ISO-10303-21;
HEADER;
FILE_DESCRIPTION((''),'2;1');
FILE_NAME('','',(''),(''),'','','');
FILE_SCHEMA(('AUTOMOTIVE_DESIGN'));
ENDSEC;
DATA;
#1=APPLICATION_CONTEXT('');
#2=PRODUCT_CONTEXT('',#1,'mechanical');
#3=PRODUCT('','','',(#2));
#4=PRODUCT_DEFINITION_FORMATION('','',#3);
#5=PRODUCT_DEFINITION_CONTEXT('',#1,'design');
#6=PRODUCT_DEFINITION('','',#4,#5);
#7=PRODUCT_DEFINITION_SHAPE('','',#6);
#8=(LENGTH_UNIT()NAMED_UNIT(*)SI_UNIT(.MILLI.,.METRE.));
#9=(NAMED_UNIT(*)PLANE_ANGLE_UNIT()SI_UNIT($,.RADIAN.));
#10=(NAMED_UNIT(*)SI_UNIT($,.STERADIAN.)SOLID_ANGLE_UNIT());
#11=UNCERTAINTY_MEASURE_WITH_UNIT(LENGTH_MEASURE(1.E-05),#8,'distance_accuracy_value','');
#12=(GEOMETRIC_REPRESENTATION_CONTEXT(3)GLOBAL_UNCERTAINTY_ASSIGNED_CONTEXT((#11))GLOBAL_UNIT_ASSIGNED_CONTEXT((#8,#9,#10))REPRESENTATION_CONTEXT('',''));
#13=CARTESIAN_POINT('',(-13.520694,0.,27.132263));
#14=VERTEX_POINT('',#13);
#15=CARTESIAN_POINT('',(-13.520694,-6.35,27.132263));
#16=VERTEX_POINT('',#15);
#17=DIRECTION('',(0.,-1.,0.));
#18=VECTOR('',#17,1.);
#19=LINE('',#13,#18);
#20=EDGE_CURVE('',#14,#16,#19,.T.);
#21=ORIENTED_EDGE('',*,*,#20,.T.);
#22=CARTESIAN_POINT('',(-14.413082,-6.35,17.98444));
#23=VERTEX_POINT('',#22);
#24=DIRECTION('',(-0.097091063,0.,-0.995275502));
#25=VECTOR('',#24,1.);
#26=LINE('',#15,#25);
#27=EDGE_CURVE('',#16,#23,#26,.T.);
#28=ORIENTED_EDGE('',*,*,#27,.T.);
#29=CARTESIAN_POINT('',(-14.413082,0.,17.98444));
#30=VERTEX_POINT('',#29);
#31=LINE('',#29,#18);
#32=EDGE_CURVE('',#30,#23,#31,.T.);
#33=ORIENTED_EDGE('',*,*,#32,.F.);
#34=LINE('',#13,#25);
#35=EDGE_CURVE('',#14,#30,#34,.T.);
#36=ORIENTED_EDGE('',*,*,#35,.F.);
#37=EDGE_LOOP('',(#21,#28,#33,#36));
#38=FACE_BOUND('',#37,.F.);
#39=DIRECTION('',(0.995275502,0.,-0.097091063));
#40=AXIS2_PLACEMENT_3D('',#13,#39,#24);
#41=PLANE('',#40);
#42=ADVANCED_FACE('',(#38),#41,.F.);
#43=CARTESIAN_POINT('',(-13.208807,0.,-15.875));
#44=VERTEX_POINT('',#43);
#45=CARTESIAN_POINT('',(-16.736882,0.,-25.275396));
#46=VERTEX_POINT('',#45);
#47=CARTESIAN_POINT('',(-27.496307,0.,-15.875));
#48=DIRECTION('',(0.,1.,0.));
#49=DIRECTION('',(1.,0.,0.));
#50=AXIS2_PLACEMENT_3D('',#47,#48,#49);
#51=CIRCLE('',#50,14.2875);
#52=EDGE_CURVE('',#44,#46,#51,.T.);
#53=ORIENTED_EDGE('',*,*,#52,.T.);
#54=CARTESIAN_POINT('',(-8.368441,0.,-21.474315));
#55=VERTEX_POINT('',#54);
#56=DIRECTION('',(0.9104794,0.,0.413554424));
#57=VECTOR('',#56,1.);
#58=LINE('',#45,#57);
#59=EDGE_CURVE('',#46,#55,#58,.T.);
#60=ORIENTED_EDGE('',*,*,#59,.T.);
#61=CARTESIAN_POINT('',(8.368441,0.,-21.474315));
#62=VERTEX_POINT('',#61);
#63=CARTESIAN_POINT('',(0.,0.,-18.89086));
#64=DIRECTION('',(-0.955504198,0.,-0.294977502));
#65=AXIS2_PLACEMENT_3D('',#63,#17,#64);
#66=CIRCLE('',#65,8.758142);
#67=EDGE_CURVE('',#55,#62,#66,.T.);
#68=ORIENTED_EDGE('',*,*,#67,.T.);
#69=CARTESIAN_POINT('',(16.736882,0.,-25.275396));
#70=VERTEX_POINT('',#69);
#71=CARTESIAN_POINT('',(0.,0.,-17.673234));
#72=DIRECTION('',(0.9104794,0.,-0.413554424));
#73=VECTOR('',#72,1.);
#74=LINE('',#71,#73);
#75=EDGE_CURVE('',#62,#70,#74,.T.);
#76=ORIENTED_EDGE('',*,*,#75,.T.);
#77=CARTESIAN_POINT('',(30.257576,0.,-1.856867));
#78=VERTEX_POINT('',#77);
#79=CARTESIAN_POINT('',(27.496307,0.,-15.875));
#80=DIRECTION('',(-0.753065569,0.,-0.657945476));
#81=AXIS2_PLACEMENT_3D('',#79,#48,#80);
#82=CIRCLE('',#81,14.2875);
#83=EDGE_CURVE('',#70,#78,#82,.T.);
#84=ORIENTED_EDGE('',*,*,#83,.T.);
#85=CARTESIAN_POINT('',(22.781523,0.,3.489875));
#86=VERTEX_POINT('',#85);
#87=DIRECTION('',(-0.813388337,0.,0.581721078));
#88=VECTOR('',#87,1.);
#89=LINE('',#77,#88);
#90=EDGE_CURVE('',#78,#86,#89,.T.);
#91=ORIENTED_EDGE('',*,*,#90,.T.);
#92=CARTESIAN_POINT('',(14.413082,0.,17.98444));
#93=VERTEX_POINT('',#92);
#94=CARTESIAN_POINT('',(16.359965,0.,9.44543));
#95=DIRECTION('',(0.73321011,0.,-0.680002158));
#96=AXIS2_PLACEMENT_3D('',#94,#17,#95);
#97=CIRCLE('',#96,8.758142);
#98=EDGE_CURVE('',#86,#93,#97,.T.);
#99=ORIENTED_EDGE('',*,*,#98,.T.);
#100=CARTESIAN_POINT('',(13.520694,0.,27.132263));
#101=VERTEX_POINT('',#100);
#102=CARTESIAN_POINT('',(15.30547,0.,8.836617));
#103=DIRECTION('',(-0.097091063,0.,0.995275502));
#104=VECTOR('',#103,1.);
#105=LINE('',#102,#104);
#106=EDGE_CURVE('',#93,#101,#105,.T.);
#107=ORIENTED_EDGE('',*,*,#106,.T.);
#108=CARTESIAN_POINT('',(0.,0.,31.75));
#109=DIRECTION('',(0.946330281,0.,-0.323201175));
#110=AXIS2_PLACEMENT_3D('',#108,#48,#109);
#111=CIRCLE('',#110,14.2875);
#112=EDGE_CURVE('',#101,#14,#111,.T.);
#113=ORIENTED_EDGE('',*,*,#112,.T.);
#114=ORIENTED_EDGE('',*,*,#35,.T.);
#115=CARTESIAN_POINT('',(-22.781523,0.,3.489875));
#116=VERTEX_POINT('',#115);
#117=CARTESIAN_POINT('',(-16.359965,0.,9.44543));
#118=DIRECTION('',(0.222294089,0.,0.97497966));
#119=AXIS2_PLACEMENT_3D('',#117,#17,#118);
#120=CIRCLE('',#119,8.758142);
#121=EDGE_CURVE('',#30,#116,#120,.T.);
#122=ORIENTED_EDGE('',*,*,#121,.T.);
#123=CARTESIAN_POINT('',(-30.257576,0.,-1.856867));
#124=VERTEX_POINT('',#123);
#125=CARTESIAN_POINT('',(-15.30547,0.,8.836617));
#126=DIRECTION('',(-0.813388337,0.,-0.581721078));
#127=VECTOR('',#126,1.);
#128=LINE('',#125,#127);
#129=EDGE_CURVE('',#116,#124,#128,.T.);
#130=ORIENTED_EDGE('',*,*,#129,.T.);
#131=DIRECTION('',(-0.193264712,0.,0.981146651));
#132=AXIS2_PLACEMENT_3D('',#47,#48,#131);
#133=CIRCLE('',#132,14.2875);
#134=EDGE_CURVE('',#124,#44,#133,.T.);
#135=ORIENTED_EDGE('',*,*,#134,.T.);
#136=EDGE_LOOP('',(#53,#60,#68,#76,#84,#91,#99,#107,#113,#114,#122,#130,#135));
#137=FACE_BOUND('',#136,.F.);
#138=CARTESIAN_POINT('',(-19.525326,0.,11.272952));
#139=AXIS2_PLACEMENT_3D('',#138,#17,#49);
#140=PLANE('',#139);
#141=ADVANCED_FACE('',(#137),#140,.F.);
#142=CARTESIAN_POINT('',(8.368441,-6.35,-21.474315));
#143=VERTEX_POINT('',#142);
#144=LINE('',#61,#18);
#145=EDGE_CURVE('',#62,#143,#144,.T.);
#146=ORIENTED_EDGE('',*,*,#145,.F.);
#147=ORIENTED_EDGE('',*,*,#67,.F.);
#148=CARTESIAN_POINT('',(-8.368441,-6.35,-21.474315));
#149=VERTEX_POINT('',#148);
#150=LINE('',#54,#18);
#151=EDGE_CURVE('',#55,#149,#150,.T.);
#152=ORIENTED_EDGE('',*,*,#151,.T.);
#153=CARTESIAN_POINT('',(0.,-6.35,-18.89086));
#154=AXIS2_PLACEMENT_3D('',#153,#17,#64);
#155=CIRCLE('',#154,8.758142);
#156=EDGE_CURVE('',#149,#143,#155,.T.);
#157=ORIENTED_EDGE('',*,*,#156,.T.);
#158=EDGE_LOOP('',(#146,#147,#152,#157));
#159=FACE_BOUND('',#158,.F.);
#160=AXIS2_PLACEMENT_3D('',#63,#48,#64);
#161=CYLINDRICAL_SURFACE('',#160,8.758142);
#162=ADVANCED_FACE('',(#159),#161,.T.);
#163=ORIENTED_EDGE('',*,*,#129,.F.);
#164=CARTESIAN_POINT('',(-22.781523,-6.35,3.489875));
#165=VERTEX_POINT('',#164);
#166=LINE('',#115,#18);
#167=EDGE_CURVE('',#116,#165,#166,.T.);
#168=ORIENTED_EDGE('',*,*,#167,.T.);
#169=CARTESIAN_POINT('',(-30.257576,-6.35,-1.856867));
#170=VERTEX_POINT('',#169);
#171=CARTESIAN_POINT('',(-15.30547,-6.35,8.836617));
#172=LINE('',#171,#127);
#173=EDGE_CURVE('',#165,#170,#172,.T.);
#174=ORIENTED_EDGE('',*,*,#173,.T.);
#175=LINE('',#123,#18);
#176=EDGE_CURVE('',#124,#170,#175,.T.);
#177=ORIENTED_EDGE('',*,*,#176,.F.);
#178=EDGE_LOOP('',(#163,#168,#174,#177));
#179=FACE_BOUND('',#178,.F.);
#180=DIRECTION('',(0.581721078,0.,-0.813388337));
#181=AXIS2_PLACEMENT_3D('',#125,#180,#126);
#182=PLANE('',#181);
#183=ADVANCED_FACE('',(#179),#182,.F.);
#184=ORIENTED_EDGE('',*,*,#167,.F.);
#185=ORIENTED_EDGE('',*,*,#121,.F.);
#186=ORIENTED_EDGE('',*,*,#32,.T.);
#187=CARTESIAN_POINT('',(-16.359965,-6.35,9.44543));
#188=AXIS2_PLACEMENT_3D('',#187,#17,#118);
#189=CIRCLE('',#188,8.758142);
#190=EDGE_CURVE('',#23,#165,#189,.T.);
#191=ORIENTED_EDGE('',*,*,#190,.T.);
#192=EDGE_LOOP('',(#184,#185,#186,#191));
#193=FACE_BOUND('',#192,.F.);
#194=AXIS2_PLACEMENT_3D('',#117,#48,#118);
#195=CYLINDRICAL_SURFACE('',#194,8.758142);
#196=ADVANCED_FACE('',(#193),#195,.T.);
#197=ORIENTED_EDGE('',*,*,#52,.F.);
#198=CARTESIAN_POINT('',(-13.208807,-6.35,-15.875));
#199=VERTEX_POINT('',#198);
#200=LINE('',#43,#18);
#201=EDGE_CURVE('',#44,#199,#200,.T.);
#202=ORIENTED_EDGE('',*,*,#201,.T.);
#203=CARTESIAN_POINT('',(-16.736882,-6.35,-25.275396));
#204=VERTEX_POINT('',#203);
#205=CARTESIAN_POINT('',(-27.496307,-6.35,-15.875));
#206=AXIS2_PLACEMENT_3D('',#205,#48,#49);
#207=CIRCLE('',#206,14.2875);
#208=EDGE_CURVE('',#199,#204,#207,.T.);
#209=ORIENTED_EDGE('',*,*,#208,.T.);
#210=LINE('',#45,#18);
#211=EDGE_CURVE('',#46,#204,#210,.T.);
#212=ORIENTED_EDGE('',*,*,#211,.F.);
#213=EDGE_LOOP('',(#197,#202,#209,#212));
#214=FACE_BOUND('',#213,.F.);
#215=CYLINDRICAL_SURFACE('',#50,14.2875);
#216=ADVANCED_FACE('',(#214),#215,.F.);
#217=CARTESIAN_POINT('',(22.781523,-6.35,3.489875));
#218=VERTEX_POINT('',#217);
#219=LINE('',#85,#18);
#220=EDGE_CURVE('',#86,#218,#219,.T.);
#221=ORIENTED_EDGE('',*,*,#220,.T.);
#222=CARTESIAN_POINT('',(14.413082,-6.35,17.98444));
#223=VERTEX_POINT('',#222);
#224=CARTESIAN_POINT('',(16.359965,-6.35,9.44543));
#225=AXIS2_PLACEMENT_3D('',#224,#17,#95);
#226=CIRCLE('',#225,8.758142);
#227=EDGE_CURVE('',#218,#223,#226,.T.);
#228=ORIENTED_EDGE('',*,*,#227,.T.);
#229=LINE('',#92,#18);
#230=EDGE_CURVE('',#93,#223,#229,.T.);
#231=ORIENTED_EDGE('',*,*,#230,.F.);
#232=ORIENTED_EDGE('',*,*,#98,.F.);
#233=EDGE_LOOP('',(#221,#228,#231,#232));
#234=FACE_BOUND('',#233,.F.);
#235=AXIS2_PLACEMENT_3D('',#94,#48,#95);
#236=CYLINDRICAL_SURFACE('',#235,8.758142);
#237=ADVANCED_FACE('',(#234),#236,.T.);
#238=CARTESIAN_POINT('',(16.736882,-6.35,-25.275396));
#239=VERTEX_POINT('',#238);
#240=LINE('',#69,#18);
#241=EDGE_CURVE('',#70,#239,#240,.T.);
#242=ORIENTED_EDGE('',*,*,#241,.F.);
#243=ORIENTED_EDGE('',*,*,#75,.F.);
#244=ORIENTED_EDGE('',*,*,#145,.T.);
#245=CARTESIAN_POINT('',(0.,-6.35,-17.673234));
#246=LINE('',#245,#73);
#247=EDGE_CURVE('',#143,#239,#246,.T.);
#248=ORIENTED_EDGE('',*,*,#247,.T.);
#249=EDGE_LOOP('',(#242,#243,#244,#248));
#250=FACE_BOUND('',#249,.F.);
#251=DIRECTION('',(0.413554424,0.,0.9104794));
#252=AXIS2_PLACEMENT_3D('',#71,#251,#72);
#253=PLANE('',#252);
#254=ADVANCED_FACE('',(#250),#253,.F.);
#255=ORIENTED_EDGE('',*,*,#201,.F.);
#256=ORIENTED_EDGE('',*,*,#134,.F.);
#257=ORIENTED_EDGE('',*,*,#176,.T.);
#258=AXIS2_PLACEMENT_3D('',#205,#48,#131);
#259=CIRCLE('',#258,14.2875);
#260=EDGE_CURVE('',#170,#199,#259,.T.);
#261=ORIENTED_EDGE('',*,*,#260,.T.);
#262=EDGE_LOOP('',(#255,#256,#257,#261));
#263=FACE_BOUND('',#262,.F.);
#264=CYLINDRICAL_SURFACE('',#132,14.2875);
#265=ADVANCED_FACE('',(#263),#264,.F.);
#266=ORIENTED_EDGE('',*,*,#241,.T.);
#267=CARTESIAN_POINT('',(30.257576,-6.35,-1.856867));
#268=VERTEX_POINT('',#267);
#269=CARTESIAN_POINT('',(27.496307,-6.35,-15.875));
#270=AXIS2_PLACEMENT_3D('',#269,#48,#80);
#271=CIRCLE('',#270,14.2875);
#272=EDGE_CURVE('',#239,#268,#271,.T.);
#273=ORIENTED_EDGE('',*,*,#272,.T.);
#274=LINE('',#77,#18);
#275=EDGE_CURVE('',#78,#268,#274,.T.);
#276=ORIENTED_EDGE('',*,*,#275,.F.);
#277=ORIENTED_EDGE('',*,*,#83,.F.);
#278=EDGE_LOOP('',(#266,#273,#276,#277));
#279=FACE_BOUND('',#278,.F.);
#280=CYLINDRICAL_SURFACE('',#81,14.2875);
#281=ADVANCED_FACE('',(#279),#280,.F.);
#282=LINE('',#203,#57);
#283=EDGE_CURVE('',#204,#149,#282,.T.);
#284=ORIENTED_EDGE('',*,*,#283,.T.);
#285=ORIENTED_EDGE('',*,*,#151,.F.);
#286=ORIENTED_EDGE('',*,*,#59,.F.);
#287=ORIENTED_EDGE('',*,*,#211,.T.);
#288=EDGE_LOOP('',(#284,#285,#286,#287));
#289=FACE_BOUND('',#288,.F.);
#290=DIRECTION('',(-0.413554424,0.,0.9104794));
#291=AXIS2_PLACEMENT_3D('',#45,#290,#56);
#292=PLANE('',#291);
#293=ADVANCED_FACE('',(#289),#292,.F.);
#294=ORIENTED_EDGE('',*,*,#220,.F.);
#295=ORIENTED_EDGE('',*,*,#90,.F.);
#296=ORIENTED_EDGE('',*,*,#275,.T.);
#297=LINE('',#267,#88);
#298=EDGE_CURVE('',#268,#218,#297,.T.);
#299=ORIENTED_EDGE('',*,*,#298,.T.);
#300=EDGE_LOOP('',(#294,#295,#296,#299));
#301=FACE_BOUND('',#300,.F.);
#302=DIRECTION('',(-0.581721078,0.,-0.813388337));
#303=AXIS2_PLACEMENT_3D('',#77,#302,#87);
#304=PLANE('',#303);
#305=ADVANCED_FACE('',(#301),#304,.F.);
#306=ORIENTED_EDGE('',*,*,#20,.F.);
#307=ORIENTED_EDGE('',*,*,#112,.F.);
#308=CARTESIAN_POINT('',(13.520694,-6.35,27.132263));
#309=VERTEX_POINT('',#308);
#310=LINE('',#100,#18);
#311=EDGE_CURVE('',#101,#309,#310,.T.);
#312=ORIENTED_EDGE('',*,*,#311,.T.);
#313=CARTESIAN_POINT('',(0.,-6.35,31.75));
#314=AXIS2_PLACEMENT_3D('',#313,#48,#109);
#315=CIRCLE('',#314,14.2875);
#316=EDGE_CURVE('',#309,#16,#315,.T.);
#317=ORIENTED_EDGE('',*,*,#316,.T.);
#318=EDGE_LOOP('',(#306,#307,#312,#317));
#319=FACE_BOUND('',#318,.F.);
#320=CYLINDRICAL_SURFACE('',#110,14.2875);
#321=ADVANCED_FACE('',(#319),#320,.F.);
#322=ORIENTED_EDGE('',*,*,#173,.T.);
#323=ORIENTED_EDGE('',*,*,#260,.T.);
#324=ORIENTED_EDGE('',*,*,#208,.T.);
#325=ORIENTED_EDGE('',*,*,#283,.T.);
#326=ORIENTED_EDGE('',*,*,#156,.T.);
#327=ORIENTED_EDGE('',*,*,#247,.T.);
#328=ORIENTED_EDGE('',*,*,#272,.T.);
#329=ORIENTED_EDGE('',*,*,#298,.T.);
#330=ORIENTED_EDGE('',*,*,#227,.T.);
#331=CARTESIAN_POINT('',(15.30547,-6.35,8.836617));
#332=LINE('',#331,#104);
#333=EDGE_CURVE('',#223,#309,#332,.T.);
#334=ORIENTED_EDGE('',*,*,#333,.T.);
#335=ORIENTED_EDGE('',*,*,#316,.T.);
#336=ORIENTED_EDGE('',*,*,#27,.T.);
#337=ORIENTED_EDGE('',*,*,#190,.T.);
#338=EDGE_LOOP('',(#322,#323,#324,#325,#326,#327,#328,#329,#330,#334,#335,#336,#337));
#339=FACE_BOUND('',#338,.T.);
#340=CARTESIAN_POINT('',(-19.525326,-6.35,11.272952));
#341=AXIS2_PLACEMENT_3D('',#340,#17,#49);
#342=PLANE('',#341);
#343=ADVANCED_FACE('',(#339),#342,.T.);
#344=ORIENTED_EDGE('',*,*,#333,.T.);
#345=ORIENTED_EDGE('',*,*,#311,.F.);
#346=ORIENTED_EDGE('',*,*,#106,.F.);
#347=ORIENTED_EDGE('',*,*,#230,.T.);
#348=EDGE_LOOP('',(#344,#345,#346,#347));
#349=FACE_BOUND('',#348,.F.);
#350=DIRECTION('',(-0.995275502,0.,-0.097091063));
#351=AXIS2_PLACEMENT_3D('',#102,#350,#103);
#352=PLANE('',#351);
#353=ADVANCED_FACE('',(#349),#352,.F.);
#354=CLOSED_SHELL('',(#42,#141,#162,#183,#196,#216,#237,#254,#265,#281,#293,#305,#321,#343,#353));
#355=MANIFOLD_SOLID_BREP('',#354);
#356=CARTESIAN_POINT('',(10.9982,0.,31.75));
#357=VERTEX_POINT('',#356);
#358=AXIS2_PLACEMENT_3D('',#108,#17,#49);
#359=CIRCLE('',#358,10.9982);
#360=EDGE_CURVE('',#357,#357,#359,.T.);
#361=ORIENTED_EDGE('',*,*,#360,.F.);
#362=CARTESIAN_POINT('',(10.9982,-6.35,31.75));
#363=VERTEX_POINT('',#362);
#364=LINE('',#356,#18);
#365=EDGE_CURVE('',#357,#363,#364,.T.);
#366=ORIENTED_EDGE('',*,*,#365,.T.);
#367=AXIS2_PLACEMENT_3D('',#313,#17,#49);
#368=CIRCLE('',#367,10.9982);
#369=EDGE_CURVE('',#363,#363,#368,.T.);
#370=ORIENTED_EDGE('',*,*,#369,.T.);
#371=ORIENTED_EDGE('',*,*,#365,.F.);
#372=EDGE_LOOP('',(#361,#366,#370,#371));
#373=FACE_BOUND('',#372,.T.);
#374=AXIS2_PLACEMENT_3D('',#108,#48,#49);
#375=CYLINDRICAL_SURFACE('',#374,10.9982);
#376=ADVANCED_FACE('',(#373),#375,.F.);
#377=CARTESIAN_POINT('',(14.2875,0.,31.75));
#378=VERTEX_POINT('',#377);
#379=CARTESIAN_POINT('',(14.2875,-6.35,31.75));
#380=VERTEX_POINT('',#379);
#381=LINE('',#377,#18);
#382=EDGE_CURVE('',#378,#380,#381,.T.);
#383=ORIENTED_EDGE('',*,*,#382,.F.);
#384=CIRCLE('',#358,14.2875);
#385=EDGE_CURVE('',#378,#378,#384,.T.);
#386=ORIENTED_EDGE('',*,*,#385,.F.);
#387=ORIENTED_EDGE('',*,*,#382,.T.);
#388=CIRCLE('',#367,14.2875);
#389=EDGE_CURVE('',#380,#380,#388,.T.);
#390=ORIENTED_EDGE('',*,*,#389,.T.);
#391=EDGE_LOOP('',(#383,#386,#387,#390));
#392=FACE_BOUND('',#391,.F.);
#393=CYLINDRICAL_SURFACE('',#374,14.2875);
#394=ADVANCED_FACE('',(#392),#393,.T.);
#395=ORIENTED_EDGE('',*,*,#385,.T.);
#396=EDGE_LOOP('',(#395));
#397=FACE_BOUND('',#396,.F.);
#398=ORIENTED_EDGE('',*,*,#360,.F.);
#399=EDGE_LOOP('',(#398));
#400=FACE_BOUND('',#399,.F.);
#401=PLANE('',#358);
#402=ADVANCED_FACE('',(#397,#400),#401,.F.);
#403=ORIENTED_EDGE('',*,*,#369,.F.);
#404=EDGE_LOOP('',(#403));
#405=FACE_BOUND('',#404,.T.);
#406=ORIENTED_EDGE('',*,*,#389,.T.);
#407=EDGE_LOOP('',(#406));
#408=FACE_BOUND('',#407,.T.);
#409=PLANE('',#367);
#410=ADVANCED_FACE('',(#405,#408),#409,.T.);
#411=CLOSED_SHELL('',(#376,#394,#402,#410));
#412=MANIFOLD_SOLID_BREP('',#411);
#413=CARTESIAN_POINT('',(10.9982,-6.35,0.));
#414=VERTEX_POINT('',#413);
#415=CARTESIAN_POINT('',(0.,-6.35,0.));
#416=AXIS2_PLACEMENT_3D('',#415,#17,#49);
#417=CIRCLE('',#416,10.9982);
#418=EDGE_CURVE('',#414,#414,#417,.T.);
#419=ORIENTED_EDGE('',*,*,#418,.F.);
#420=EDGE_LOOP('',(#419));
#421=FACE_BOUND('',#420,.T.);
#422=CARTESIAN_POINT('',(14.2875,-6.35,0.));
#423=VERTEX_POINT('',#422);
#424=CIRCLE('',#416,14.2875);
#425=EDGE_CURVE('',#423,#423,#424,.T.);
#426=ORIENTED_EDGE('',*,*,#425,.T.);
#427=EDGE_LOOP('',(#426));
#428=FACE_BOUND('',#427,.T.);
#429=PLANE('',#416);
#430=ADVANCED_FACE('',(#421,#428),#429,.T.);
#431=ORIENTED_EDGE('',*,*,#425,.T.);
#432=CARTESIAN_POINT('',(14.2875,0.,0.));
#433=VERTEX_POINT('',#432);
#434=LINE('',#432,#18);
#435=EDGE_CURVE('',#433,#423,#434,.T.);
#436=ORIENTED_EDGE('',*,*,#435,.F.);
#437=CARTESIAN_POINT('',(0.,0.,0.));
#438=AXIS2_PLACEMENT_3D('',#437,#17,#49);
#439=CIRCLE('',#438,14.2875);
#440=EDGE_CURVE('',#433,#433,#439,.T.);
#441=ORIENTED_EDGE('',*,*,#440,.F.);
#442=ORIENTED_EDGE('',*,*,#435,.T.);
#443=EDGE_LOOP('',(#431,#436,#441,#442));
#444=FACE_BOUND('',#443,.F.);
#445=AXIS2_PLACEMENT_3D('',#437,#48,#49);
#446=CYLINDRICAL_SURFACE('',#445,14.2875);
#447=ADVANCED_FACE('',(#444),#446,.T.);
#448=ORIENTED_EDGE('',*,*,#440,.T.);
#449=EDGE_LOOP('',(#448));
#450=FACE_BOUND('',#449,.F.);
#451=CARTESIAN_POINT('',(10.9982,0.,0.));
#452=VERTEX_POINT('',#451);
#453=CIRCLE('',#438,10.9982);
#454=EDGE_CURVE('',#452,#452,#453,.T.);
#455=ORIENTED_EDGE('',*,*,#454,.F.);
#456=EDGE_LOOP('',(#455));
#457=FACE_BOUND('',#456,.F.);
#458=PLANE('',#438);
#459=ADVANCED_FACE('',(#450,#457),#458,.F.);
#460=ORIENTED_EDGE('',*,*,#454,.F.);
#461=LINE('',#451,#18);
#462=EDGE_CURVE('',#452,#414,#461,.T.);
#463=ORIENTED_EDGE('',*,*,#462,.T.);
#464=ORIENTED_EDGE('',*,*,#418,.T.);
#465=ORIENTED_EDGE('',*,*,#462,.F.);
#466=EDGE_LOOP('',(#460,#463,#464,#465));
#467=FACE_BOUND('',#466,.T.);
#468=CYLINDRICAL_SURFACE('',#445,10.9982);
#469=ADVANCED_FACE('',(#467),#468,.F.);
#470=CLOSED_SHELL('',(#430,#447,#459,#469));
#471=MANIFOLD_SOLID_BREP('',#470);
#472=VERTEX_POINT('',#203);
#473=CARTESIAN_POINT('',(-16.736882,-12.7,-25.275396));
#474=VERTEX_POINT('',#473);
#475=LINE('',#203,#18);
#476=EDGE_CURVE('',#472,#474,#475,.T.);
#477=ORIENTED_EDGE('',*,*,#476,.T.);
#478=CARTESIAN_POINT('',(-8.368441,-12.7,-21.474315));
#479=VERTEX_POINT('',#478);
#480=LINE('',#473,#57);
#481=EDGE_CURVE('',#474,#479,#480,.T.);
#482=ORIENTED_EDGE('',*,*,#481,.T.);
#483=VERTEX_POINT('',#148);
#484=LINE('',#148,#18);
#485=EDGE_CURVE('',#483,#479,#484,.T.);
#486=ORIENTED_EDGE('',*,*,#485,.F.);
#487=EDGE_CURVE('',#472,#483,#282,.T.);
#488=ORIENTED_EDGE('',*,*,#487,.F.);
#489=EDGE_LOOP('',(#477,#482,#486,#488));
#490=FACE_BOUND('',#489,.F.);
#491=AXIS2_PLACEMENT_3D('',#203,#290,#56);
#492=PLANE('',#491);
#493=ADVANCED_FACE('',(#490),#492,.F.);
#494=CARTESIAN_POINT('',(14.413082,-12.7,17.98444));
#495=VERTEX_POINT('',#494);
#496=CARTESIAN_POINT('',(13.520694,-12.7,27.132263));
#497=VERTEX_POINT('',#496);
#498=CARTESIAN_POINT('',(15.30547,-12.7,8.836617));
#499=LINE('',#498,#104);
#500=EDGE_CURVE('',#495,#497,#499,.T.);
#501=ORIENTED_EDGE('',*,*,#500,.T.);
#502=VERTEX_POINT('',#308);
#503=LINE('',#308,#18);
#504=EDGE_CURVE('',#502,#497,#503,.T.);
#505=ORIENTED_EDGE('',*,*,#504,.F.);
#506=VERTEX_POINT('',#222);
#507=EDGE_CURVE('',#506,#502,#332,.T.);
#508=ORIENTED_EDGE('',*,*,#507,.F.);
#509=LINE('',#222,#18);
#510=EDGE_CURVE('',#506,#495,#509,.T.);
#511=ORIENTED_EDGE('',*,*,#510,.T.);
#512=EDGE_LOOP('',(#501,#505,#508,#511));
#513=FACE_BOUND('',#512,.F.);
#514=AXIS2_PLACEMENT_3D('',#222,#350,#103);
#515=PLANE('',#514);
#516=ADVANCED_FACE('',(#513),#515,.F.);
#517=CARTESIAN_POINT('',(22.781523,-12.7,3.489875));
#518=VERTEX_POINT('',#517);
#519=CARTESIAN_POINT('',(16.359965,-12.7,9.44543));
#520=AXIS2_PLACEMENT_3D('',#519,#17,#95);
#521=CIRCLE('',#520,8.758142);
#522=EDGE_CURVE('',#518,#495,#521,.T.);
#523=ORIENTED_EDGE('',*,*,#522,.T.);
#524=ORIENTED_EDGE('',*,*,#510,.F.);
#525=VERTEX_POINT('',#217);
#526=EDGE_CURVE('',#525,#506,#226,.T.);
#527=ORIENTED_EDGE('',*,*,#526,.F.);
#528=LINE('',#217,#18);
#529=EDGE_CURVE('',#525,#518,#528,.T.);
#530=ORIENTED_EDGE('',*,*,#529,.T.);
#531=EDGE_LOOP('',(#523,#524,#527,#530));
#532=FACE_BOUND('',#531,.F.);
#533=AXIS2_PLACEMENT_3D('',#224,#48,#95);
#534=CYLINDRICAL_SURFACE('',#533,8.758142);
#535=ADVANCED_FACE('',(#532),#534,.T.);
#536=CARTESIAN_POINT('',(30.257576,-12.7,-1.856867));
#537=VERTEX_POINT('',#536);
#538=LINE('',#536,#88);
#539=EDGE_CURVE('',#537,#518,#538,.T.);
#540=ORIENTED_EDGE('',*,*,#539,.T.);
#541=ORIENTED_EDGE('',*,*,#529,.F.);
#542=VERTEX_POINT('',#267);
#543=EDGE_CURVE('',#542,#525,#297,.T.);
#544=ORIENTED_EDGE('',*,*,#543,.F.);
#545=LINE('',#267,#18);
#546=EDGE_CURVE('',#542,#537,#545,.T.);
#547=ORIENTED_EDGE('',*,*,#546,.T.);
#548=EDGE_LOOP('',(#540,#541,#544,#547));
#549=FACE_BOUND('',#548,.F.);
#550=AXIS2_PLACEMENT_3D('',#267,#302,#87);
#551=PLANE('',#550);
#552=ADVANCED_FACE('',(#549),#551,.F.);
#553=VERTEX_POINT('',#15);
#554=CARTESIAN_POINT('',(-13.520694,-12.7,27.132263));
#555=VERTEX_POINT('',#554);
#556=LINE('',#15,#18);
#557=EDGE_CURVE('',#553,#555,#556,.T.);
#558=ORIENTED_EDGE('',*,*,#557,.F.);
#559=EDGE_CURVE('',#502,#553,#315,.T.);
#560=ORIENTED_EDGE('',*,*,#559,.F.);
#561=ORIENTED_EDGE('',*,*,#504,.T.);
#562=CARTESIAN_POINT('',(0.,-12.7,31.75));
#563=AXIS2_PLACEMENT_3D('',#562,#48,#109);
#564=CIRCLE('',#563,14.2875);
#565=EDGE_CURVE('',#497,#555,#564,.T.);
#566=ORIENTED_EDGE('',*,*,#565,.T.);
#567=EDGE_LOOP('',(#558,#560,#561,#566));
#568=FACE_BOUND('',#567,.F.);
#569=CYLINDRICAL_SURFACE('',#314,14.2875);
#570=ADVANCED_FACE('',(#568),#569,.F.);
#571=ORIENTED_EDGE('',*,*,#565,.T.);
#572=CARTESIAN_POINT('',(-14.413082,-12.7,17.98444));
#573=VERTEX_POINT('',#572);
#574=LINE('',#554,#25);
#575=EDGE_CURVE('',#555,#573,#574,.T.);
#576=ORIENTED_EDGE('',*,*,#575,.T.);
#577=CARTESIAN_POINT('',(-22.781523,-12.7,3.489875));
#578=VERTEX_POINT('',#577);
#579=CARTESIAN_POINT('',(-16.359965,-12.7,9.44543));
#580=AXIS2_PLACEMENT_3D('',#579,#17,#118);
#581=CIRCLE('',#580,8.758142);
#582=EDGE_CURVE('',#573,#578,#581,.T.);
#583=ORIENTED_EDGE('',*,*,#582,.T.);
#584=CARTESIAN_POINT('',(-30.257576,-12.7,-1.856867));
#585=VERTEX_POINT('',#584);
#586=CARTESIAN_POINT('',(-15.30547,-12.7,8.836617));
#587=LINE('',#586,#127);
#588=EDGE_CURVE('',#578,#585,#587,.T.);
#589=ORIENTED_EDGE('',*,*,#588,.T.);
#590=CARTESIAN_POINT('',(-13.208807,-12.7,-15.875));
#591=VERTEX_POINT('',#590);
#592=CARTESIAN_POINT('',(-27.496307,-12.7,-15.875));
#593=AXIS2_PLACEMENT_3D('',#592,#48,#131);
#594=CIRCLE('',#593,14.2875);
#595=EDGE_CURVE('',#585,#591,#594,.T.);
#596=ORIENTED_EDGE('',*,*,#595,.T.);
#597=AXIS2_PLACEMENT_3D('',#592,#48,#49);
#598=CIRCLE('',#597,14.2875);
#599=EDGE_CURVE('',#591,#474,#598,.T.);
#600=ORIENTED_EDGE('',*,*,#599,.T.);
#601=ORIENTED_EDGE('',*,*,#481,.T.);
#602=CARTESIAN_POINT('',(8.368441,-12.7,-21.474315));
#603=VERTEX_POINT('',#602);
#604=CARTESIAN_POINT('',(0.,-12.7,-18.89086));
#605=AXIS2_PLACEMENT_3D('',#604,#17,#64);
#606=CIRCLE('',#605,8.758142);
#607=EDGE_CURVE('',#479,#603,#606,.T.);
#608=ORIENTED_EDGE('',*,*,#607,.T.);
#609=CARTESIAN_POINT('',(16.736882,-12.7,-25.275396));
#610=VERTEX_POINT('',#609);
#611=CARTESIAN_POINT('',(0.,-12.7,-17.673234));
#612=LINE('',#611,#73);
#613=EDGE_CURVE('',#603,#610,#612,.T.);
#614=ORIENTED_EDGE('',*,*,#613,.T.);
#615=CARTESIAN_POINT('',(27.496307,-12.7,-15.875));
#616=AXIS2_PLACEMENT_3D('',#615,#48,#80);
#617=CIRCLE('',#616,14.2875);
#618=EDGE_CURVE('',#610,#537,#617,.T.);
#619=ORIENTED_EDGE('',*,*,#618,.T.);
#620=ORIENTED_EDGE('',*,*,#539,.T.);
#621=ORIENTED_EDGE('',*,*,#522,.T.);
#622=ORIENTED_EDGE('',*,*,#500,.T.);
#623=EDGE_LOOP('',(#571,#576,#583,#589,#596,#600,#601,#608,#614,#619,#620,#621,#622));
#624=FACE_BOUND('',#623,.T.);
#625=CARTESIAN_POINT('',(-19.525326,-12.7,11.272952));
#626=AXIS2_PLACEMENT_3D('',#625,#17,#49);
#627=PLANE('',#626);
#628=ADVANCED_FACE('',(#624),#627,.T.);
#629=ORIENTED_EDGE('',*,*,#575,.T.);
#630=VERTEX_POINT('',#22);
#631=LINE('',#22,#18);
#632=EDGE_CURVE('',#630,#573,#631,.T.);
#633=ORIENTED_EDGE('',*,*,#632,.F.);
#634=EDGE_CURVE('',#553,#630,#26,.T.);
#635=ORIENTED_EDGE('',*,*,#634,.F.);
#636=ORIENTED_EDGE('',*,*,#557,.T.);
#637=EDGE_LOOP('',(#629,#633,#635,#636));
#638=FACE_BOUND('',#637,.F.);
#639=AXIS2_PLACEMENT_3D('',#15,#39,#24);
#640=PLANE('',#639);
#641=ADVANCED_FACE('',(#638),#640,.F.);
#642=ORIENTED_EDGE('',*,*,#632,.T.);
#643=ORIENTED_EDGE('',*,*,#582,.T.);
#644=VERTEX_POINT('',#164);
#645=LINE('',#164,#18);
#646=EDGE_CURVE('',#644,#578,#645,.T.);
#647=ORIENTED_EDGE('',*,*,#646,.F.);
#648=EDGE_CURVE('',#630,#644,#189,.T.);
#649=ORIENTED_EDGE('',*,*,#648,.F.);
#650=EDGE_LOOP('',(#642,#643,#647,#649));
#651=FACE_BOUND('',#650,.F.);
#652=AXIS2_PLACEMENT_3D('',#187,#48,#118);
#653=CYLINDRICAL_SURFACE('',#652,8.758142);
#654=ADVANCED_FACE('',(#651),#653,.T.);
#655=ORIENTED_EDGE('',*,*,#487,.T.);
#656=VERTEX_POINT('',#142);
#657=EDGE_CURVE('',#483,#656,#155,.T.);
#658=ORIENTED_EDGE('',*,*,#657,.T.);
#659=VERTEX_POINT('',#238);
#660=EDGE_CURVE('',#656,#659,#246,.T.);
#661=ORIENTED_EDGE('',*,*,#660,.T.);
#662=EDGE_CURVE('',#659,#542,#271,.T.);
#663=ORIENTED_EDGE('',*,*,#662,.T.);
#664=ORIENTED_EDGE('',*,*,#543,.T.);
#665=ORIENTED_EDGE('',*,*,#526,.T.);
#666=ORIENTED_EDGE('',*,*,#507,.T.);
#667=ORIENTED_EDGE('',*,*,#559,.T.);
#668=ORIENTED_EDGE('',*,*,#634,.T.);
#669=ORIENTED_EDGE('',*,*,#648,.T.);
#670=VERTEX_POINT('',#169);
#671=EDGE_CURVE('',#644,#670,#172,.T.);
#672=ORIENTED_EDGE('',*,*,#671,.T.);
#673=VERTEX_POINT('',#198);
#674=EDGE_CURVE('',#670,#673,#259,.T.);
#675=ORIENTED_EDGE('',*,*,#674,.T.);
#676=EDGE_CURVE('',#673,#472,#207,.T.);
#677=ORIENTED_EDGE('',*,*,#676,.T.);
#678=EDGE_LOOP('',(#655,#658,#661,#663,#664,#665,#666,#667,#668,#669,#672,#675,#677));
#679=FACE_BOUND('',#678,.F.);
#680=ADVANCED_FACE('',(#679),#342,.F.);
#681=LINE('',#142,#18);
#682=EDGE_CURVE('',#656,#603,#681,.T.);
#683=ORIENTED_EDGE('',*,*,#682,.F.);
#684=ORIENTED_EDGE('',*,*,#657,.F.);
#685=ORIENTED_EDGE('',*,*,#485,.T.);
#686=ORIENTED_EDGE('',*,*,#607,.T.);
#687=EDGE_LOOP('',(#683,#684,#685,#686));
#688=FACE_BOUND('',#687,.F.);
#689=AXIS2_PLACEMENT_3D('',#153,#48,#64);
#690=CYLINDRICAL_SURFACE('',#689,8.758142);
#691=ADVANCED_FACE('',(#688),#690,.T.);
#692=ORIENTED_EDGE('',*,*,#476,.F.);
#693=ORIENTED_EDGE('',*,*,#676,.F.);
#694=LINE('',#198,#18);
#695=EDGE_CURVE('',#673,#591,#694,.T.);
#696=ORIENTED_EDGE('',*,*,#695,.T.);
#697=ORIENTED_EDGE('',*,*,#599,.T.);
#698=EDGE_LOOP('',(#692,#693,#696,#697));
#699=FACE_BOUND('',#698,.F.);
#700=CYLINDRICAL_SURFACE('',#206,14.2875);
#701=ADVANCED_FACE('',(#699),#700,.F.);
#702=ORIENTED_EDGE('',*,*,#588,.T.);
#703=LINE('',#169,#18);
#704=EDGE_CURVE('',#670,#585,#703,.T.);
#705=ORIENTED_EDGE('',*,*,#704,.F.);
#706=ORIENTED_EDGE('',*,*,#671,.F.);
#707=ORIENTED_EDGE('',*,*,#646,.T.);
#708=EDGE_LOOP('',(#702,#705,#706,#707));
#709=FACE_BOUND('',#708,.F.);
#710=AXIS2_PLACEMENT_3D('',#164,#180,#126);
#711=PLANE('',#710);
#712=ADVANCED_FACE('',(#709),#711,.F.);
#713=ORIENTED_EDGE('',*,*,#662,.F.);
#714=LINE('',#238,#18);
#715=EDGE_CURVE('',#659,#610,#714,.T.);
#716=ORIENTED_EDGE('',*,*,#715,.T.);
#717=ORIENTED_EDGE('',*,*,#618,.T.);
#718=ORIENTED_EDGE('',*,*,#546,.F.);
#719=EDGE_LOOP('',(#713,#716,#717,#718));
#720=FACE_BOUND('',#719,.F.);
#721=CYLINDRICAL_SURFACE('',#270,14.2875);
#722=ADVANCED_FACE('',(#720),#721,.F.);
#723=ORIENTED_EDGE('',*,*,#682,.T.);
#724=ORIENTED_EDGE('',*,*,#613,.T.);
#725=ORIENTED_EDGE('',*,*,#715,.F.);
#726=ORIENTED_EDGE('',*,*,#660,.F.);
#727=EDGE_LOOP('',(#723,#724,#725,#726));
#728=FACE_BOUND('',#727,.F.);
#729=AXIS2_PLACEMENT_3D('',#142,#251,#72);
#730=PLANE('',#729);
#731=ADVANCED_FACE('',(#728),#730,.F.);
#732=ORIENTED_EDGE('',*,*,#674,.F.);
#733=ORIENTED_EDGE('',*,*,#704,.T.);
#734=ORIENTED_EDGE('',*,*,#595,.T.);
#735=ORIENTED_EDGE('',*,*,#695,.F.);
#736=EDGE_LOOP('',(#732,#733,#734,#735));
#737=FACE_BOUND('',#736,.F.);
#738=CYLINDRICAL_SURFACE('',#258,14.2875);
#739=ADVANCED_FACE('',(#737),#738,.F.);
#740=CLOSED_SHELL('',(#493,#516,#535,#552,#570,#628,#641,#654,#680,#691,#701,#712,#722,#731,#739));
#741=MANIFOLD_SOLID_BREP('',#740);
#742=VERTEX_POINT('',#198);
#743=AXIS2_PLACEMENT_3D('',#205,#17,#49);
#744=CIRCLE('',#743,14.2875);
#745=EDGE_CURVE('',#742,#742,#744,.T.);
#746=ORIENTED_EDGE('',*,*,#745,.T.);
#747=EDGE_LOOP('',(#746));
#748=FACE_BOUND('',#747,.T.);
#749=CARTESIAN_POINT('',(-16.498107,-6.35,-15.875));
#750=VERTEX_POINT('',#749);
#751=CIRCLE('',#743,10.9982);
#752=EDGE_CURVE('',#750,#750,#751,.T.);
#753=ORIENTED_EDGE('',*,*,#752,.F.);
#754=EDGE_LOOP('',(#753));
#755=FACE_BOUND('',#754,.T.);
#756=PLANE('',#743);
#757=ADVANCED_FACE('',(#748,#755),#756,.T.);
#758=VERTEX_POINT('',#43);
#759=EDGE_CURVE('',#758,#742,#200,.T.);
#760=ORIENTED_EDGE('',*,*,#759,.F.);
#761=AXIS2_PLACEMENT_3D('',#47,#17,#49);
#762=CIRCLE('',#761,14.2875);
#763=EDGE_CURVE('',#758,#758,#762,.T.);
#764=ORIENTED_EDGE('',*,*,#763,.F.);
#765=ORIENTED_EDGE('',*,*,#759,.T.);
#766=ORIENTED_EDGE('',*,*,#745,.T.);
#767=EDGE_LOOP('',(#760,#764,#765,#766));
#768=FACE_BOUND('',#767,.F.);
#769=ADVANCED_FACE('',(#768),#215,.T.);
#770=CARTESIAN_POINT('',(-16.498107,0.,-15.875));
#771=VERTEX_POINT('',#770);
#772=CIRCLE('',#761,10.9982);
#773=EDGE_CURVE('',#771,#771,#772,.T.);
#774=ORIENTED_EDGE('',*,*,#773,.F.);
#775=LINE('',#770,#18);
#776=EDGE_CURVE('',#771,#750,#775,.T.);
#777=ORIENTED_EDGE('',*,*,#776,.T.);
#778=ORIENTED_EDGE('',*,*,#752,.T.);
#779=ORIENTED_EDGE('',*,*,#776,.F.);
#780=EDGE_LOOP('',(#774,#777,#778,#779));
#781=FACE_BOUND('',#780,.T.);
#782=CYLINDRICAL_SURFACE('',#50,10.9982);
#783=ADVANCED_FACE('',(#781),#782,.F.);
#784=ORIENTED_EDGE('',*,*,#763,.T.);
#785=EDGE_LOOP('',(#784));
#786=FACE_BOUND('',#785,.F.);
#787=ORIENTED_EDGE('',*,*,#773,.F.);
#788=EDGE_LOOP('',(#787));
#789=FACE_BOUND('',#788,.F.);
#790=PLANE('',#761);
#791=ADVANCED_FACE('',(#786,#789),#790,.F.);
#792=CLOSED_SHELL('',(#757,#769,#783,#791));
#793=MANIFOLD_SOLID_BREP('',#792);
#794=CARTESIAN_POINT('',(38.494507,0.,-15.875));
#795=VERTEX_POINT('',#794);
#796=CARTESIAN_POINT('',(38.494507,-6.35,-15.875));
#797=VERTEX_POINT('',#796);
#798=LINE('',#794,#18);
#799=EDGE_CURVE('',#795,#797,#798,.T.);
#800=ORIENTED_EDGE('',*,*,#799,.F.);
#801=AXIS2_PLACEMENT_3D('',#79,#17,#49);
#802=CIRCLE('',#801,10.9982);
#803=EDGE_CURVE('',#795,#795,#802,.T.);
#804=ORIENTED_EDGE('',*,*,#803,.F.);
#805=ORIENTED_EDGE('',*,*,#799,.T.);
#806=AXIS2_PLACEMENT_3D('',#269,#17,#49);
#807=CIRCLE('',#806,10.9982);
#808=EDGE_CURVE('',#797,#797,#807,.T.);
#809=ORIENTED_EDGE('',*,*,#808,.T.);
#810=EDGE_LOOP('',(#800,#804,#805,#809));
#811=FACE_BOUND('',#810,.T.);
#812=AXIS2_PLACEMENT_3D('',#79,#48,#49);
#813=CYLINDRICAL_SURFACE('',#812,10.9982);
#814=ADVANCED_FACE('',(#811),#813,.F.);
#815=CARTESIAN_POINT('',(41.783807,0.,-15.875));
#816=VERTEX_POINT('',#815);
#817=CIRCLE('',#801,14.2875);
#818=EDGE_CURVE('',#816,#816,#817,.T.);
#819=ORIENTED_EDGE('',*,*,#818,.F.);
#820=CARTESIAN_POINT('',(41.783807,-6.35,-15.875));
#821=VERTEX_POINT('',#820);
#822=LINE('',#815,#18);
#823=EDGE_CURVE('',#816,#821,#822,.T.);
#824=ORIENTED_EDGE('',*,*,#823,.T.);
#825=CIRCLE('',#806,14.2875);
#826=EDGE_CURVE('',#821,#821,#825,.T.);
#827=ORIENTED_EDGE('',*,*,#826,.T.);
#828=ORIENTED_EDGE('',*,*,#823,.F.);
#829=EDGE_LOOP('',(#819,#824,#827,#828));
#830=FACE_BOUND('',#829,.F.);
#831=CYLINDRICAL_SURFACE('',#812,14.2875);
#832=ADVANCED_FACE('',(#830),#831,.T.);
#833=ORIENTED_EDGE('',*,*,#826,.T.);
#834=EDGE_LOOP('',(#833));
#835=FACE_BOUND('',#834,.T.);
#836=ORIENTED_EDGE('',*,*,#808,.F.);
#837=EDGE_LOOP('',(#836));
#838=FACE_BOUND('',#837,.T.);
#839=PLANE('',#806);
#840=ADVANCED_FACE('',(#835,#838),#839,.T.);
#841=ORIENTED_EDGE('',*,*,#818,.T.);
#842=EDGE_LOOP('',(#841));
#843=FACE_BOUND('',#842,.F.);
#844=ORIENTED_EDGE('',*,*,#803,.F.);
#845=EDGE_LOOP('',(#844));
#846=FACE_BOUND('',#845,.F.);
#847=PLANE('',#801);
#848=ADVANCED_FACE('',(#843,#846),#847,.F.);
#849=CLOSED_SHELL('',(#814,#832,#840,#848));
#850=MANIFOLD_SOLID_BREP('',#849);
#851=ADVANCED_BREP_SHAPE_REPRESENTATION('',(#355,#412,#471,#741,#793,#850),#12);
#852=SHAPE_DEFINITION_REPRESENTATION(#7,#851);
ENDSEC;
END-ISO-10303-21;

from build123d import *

# Parameters (mm, degrees)
F0_R     = 14.2875
F0_R_2   = 10.9982
F2_DEPTH = 6.35
F1_W     = 0.4390429688
F1_H     = 3.7777539063
F1_R     = 14.2875
F1_W_2   = 0.3297629937
F1_H_2   = 2.8374522002
F5_DEPTH = 6.35
F7_DEPTH = 6.35
F8_DEPTH = 6.35


with BuildPart() as f2:
    # F0 (on Front) → F2 (new body)
    with BuildSketch(Plane.XZ):
        with Locations((0, 31.75)):
            Circle(F0_R)
        with Locations((0, 31.75)):
            Circle(F0_R_2, mode=Mode.SUBTRACT)
    extrude(amount=F2_DEPTH)


with BuildPart() as f2b:
    # F0 (on Front) → F2, piece 2 (new body)
    with BuildSketch(Plane.XZ):
        Circle(F0_R)
        Circle(F0_R_2, mode=Mode.SUBTRACT)
    extrude(amount=F2_DEPTH)


with BuildPart() as f2c:
    # F0 (on Front) → F2, piece 3 (new body)
    with BuildSketch(Plane.XZ):
        with Locations((-27.4963065702, -15.875)):
            Circle(F0_R)
        with Locations((-27.4963065702, -15.875)):
            Circle(F0_R_2, mode=Mode.SUBTRACT)
    extrude(amount=F2_DEPTH)


with BuildPart() as f2d:
    # F0 (on Front) → F2, piece 4 (new body)
    with BuildSketch(Plane.XZ):
        with Locations((27.4963065702, -15.875)):
            Circle(F0_R)
        with Locations((27.4963065702, -15.875)):
            Circle(F0_R_2, mode=Mode.SUBTRACT)
    extrude(amount=F2_DEPTH)


with BuildPart() as f2e:
    # F1 (on Front) → F2, piece 5 (new body)
    with BuildSketch(Plane.XZ):
        with BuildLine():
            ThreePointArc((13.5206938879, 27.1322632123), (0, 17.4625), (-13.5206938879, 27.1322632123))
            ThreePointArc((-13.5206938879, 27.1322632123), (-15.305469781, 8.8366170981), (-30.257576148, -1.8568672225))
            ThreePointArc((-30.257576148, -1.8568672225), (-18.4221394691, -4.8390520266), (-13.2088065702, -15.875))
            ThreePointArc((-13.2088065702, -15.875), (-14.1198733557, -20.8953277493), (-16.7368822601, -25.2753959899))
            ThreePointArc((-16.7368822601, -25.2753959899), (-11.342771298, -20.7856162625), (-4.8176097302, -18.2016616216))
            Line((-4.8176097302, -18.2016616216), (-5.5088278546, -18.2016616216))
            Line((-5.5088278546, -18.2016616216), (-5.5088278546, -14.4239077154))
            Line((-5.5088278546, -14.4239077154), (-3.4029098859, -14.4239077154))
            Line((-3.4029098859, -14.4239077154), (-3.4029098859, -14.814168132))
            Line((-3.4029098859, -14.814168132), (-5.0697848859, -14.814168132))
            Line((-5.0697848859, -14.814168132), (-5.0697848859, -16.0312514654))
            Line((-5.0697848859, -16.0312514654), (-3.5037822817, -16.0312514654))
            Line((-3.5037822817, -16.0312514654), (-3.5037822817, -16.4190314133))
            Line((-3.5037822817, -16.4190314133), (-5.0697848859, -16.4190314133))
            Line((-5.0697848859, -16.4190314133), (-5.0697848859, -17.8089207362))
            Line((-5.0697848859, -17.8089207362), (-3.4029098859, -17.8089207362))
            Line((-3.4029098859, -17.8089207362), (-3.4029098859, -17.9352920139))
            ThreePointArc((-3.4029098859, -17.9352920139), (-2.9850761481, -17.8746117561), (-2.5661650942, -17.821879839))
            Line((-2.5661650942, -17.821879839), (-2.5661650942, -14.4239077154))
            Line((-2.5661650942, -14.4239077154), (-2.0700713442, -14.4239077154))
            Line((-2.0700713442, -14.4239077154), (-0.0104554588, -17.5815444341))
            Line((-0.0104554588, -17.5815444341), (0.0102151141, -17.5815444341))
            add(Edge.make_bspline(
                [(0.0102151141, -17.5815444341), (0.0052541766, -17.5120913091), (-0.0129359276, -17.1334064133)],
                knots=[0, 0, 0, 1, 1, 1], degree=2))
            add(Edge.make_bspline(
                [(-0.0129359276, -17.1334064133), (-0.0311260317, -16.7547215175), (-0.0261650942, -16.5918374029)],
                knots=[0, 0, 0, 1, 1, 1], degree=2))
            Line((-0.0261650942, -16.5918374029), (-0.0261650942, -14.4239077154))
            Line((-0.0261650942, -14.4239077154), (0.3847658954, -14.4239077154))
            Line((0.3847658954, -14.4239077154), (0.3847658954, -17.6765650374))
            ThreePointArc((0.3847658954, -17.6765650374), (0.9042579175, -17.6916373697), (1.4232554787, -17.7188525809))
            Line((1.4232554787, -17.7188525809), (1.4232554787, -14.4239077154))
            Line((1.4232554787, -14.4239077154), (1.9193492287, -14.4239077154))
            Line((1.9193492287, -14.4239077154), (3.9789651141, -17.5815444341))
            Line((3.9789651141, -17.5815444341), (3.999635687, -17.5815444341))
            add(Edge.make_bspline(
                [(3.999635687, -17.5815444341), (3.9946747495, -17.5120913091), (3.9764846454, -17.1334064133)],
                knots=[0, 0, 0, 1, 1, 1], degree=2))
            add(Edge.make_bspline(
                [(3.9764846454, -17.1334064133), (3.9582945412, -16.7547215175), (3.9632554787, -16.5918374029)],
                knots=[0, 0, 0, 1, 1, 1], degree=2))
            Line((3.9632554787, -16.5918374029), (3.9632554787, -14.4239077154))
            Line((3.9632554787, -14.4239077154), (4.3741864683, -14.4239077154))
            Line((4.3741864683, -14.4239077154), (4.3741864683, -18.1079354893))
            ThreePointArc((4.3741864683, -18.1079354893), (11.1473058727, -20.6709567816), (16.7368822601, -25.2753959899))
            ThreePointArc((16.7368822601, -25.2753959899), (15.1229686136, -8.73125), (30.257576148, -1.8568672225))
            ThreePointArc((30.257576148, -1.8568672225), (15.305469781, 8.8366170981), (13.5206938879, 27.1322632123))
        make_face()
        Polygon((-7.2740947817, -14.814168132), (-7.2740947817, -18.2016616216), (-7.7131377505, -18.2016616216), (-7.7131377505, -14.814168132), (-8.9095505109, -14.814168132), (-8.9095505109, -14.4239077154), (-6.0776820213, -14.4239077154), (-6.0776820213, -14.814168132), align=None, mode=Mode.SUBTRACT)
        with Locations((5.632197536, -16.3127846685)):
            Rectangle(F1_W, F1_H, mode=Mode.SUBTRACT)
        with BuildLine():
            add(Edge.make_bspline(
                [(8.7960354266, -16.5662058925), (9.0192776141, -16.80929183), (9.0192776141, -17.196244955)],
                knots=[0, 0, 0, 1, 1, 1], degree=2))
            add(Edge.make_bspline(
                [(9.0192776141, -17.196244955), (9.0192776141, -17.6948191737), (8.6575425881, -17.9742853195)],
                knots=[0, 0, 0, 1, 1, 1], degree=2))
            add(Edge.make_bspline(
                [(8.6575425881, -17.9742853195), (8.295807562, -18.2537514654), (7.6756903745, -18.2537514654)],
                knots=[0, 0, 0, 1, 1, 1], degree=2))
            add(Edge.make_bspline(
                [(7.6756903745, -18.2537514654), (7.0043101662, -18.2537514654), (6.6421617287, -18.0801186529)],
                knots=[0, 0, 0, 1, 1, 1], degree=2))
            Line((6.6421617287, -18.0801186529), (6.6421617287, -17.6567853195))
            add(Edge.make_bspline(
                [(6.6421617287, -17.6567853195), (6.8753257912, -17.7543504237), (7.1490041766, -17.811401205)],
                knots=[0, 0, 0, 1, 1, 1], degree=2))
            add(Edge.make_bspline(
                [(7.1490041766, -17.811401205), (7.422682562, -17.8684519862), (7.6914000099, -17.8684519862)],
                knots=[0, 0, 0, 1, 1, 1], degree=2))
            add(Edge.make_bspline(
                [(7.6914000099, -17.8684519862), (8.1304429787, -17.8684519862), (8.3528583433, -17.7018471685)],
                knots=[0, 0, 0, 1, 1, 1], degree=2))
            add(Edge.make_bspline(
                [(8.3528583433, -17.7018471685), (8.5752737079, -17.5352423508), (8.5752737079, -17.2375861008)],
                knots=[0, 0, 0, 1, 1, 1], degree=2))
            add(Edge.make_bspline(
                [(8.5752737079, -17.2375861008), (8.5752737079, -17.0416290695), (8.4963121193, -16.9163653977)],
                knots=[0, 0, 0, 1, 1, 1], degree=2))
            add(Edge.make_bspline(
                [(8.4963121193, -16.9163653977), (8.4173505308, -16.7911017258), (8.2325556089, -16.684854981)],
                knots=[0, 0, 0, 1, 1, 1], degree=2))
            add(Edge.make_bspline(
                [(8.2325556089, -16.684854981), (8.047760687, -16.5786082362), (7.670729437, -16.4446629237)],
                knots=[0, 0, 0, 1, 1, 1], degree=2))
            add(Edge.make_bspline(
                [(7.670729437, -16.4446629237), (7.1440432391, -16.2561472987), (6.9179071714, -15.9977651373)],
                knots=[0, 0, 0, 1, 1, 1], degree=2))
            add(Edge.make_bspline(
                [(6.9179071714, -15.9977651373), (6.6917711037, -15.7393829758), (6.6917711037, -15.3234910487)],
                knots=[0, 0, 0, 1, 1, 1], degree=2))
            add(Edge.make_bspline(
                [(6.6917711037, -15.3234910487), (6.6917711037, -14.8869285487), (7.0196063901, -14.6285463873)],
                knots=[0, 0, 0, 1, 1, 1], degree=2))
            add(Edge.make_bspline(
                [(7.0196063901, -14.6285463873), (7.3474416766, -14.3701642258), (7.8881838641, -14.3701642258)],
                knots=[0, 0, 0, 1, 1, 1], degree=2))
            add(Edge.make_bspline(
                [(7.8881838641, -14.3701642258), (8.4512502704, -14.3701642258), (8.9241929787, -14.576869955)],
                knots=[0, 0, 0, 1, 1, 1], degree=2))
            Line((8.9241929787, -14.576869955), (8.7869403745, -14.9588621425))
            add(Edge.make_bspline(
                [(8.7869403745, -14.9588621425), (8.3189586037, -14.7629051112), (7.8774351662, -14.7629051112)],
                knots=[0, 0, 0, 1, 1, 1], degree=2))
            add(Edge.make_bspline(
                [(7.8774351662, -14.7629051112), (7.5285158954, -14.7629051112), (7.3321454526, -14.9125600591)],
                knots=[0, 0, 0, 1, 1, 1], degree=2))
            add(Edge.make_bspline(
                [(7.3321454526, -14.9125600591), (7.1357750099, -15.062215007), (7.1357750099, -15.3284519862)],
                knots=[0, 0, 0, 1, 1, 1], degree=2))
            add(Edge.make_bspline(
                [(7.1357750099, -15.3284519862), (7.1357750099, -15.5244090175), (7.2081220151, -15.6500861008)],
                knots=[0, 0, 0, 1, 1, 1], degree=2))
            add(Edge.make_bspline(
                [(7.2081220151, -15.6500861008), (7.2804690204, -15.7757631841), (7.452448187, -15.8803562831)],
                knots=[0, 0, 0, 1, 1, 1], degree=2))
            add(Edge.make_bspline(
                [(7.452448187, -15.8803562831), (7.6244273537, -15.984949382), (7.978307562, -16.1114532883)],
                knots=[0, 0, 0, 1, 1, 1], degree=2))
            add(Edge.make_bspline(
                [(7.978307562, -16.1114532883), (8.5727932391, -16.323119955), (8.7960354266, -16.5662058925)],
                knots=[0, 0, 0, 1, 1, 1], degree=2))
        make_face(mode=Mode.SUBTRACT)
        Circle(F1_R, mode=Mode.SUBTRACT)
        Polygon((-3.553615096, 16.0265346236), (-2.3699460451, 14.4218122587), (-2.758085162, 14.4218122587), (-3.7920877694, 15.7979983115), (-4.0895575886, 15.534063712), (-4.0895575886, 14.4218122587), (-4.4193205823, 14.4218122587), (-4.4193205823, 17.2592644588), (-4.0895575886, 17.2592644588), (-4.0895575886, 15.8520272766), (-2.8027987883, 17.2592644588), (-2.4127966036, 17.2592644588), align=None, mode=Mode.SUBTRACT)
        with Locations((-1.8150623636, 15.8405383587)):
            Rectangle(F1_W_2, F1_H_2, mode=Mode.SUBTRACT)
        Polygon((0.0011181922, 16.9661417977), (0.0011181922, 14.4218122587), (-0.3286448015, 14.4218122587), (-0.3286448015, 16.9661417977), (-1.2272644849, 16.9661417977), (-1.2272644849, 17.2592644588), (0.8997378756, 17.2592644588), (0.8997378756, 16.9661417977), align=None, mode=Mode.SUBTRACT)
        with BuildLine():
            add(Edge.make_bspline(
                [(2.7603215464, 15.6501949358), (2.9279976449, 15.4676142952), (2.9279976449, 15.1769757245)],
                knots=[0, 0, 0, 1, 1, 1], degree=2))
            add(Edge.make_bspline(
                [(2.9279976449, 15.1769757245), (2.9279976449, 14.8024991045), (2.6563002631, 14.5925934701)],
                knots=[0, 0, 0, 1, 1, 1], degree=2))
            add(Edge.make_bspline(
                [(2.6563002631, 14.5925934701), (2.3846028812, 14.3826878357), (1.918835941, 14.3826878357)],
                knots=[0, 0, 0, 1, 1, 1], degree=2))
            add(Edge.make_bspline(
                [(1.918835941, 14.3826878357), (1.4145656003, 14.3826878357), (1.1425577072, 14.513102579)],
                knots=[0, 0, 0, 1, 1, 1], degree=2))
            Line((1.1425577072, 14.513102579), (1.1425577072, 14.8310661435))
            add(Edge.make_bspline(
                [(1.1425577072, 14.8310661435), (1.3176860767, 14.7577854782), (1.523244553, 14.7149349197)],
                knots=[0, 0, 0, 1, 1, 1], degree=2))
            add(Edge.make_bspline(
                [(1.523244553, 14.7149349197), (1.7288030293, 14.6720843612), (1.9306353701, 14.6720843612)],
                knots=[0, 0, 0, 1, 1, 1], degree=2))
            add(Edge.make_bspline(
                [(1.9306353701, 14.6720843612), (2.2603983638, 14.6720843612), (2.4274534397, 14.7972204125)],
                knots=[0, 0, 0, 1, 1, 1], degree=2))
            add(Edge.make_bspline(
                [(2.4274534397, 14.7972204125), (2.5945085157, 14.9223564638), (2.5945085157, 15.1459245951)],
                knots=[0, 0, 0, 1, 1, 1], degree=2))
            add(Edge.make_bspline(
                [(2.5945085157, 15.1459245951), (2.5945085157, 15.2931069483), (2.5352008586, 15.3871918702)],
                knots=[0, 0, 0, 1, 1, 1], degree=2))
            add(Edge.make_bspline(
                [(2.5352008586, 15.3871918702), (2.4758932015, 15.4812767921), (2.3370946533, 15.5610781946)],
                knots=[0, 0, 0, 1, 1, 1], degree=2))
            add(Edge.make_bspline(
                [(2.3370946533, 15.5610781946), (2.1982961051, 15.640879597), (1.9151098054, 15.7414852561)],
                knots=[0, 0, 0, 1, 1, 1], degree=2))
            add(Edge.make_bspline(
                [(1.9151098054, 15.7414852561), (1.5195184175, 15.883078406), (1.34966874, 16.0771479644)],
                knots=[0, 0, 0, 1, 1, 1], degree=2))
            add(Edge.make_bspline(
                [(1.34966874, 16.0771479644), (1.1798190624, 16.2712175228), (1.1798190624, 16.5835918841)],
                knots=[0, 0, 0, 1, 1, 1], degree=2))
            add(Edge.make_bspline(
                [(1.1798190624, 16.5835918841), (1.1798190624, 16.9114918101), (1.4260545182, 17.1055613685)],
                knots=[0, 0, 0, 1, 1, 1], degree=2))
            add(Edge.make_bspline(
                [(1.4260545182, 17.1055613685), (1.6722899739, 17.299630927), (2.0784387458, 17.299630927)],
                knots=[0, 0, 0, 1, 1, 1], degree=2))
            add(Edge.make_bspline(
                [(2.0784387458, 17.299630927), (2.5013551276, 17.299630927), (2.8565800474, 17.1443752802)],
                knots=[0, 0, 0, 1, 1, 1], degree=2))
            Line((2.8565800474, 17.1443752802), (2.7534902979, 16.857462845))
            add(Edge.make_bspline(
                [(2.7534902979, 16.857462845), (2.4019915137, 17.0046451981), (2.0703654522, 17.0046451981)],
                knots=[0, 0, 0, 1, 1, 1], degree=2))
            add(Edge.make_bspline(
                [(2.0703654522, 17.0046451981), (1.8082939205, 17.0046451981), (1.6608010561, 16.8922401099)],
                knots=[0, 0, 0, 1, 1, 1], degree=2))
            add(Edge.make_bspline(
                [(1.6608010561, 16.8922401099), (1.5133081916, 16.7798350216), (1.5133081916, 16.5798657486)],
                knots=[0, 0, 0, 1, 1, 1], degree=2))
            add(Edge.make_bspline(
                [(1.5133081916, 16.5798657486), (1.5133081916, 16.4326833955), (1.567647668, 16.3382879622)],
                knots=[0, 0, 0, 1, 1, 1], degree=2))
            add(Edge.make_bspline(
                [(1.567647668, 16.3382879622), (1.6219871444, 16.243892529), (1.7511598425, 16.1653331718)],
                knots=[0, 0, 0, 1, 1, 1], degree=2))
            add(Edge.make_bspline(
                [(1.7511598425, 16.1653331718), (1.8803325406, 16.0867738145), (2.1461302078, 15.9917573587)],
                knots=[0, 0, 0, 1, 1, 1], degree=2))
            add(Edge.make_bspline(
                [(2.1461302078, 15.9917573587), (2.5926454479, 15.8327755764), (2.7603215464, 15.6501949358)],
                knots=[0, 0, 0, 1, 1, 1], degree=2))
        make_face(mode=Mode.SUBTRACT)
        Polygon((5.6337930566, 14.4218122587), (5.2922306337, 14.4218122587), (4.9388687817, 15.3241580776), (3.8017764249, 15.3241580776), (3.4527617309, 14.4218122587), (3.1186515791, 14.4218122587), (4.2402183713, 17.271063888), (4.5178154677, 17.271063888), align=None, mode=Mode.SUBTRACT)
    extrude(amount=F2_DEPTH)

    # F4 (on Front) → F5 (join)
    with BuildSketch(Plane.XZ):
        with BuildLine():
            ThreePointArc((-15.305469781, 8.8366170981), (-12.4328863407, 17.7912682301), (-13.5206938879, 27.1322632123))
            Line((-13.5206938879, 27.1322632123), (-15.305469781, 8.8366170981))
        make_face()
        with BuildLine():
            ThreePointArc((-30.257576148, -1.8568672225), (-21.6241334232, 1.8715612984), (-15.305469781, 8.8366170981))
            Line((-15.305469781, 8.8366170981), (-30.257576148, -1.8568672225))
        make_face()
        with BuildLine():
            Line((15.305469781, 8.8366170981), (13.5206938879, 27.1322632123))
            ThreePointArc((13.5206938879, 27.1322632123), (12.4328863407, 17.7912682301), (15.305469781, 8.8366170981))
        make_face()
        with BuildLine():
            Line((30.257576148, -1.8568672225), (15.305469781, 8.8366170981))
            ThreePointArc((15.305469781, 8.8366170981), (21.6241334232, 1.8715612984), (30.257576148, -1.8568672225))
        make_face()
        with BuildLine():
            ThreePointArc((13.5206938879, 27.1322632123), (0, 17.4625), (-13.5206938879, 27.1322632123))
            ThreePointArc((-13.5206938879, 27.1322632123), (-12.4328863407, 17.7912682301), (-15.305469781, 8.8366170981))
            ThreePointArc((-15.305469781, 8.8366170981), (-21.6241334232, 1.8715612984), (-30.257576148, -1.8568672225))
            ThreePointArc((-30.257576148, -1.8568672225), (-18.4221394691, -4.8390520266), (-13.2088065702, -15.875))
            ThreePointArc((-13.2088065702, -15.875), (-14.1198733557, -20.8953277493), (-16.7368822601, -25.2753959899))
            Line((-16.7368822601, -25.2753959899), (0, -17.6732341963))
            Line((0, -17.6732341963), (16.7368822601, -25.2753959899))
            ThreePointArc((16.7368822601, -25.2753959899), (15.1229686136, -8.73125), (30.257576148, -1.8568672225))
            ThreePointArc((30.257576148, -1.8568672225), (21.6241334232, 1.8715612984), (15.305469781, 8.8366170981))
            ThreePointArc((15.305469781, 8.8366170981), (12.4328863407, 17.7912682301), (13.5206938879, 27.1322632123))
        make_face()
    extrude(amount=F5_DEPTH)

    # F6 (on Front) → F7 (join)
    with BuildSketch(Plane.XZ):
        with BuildLine():
            Line((-15.305469781, 8.8366170981), (-14.4130818345, 17.9844401552))
            ThreePointArc((-14.4130818345, 17.9844401552), (-23.9447381252, 13.8245010023), (-22.7815229645, 3.4898749378))
            Line((-22.7815229645, 3.4898749378), (-15.305469781, 8.8366170981))
        make_face()
        with BuildLine():
            ThreePointArc((22.7815229645, 3.4898749378), (23.9447381252, 13.8245010023), (14.4130818345, 17.9844401552))
            Line((14.4130818345, 17.9844401552), (15.305469781, 8.8366170981))
            Line((15.305469781, 8.8366170981), (22.7815229645, 3.4898749378))
        make_face()
        with BuildLine():
            Line((0, -17.6732341963), (-8.36844113, -21.4743150931))
            ThreePointArc((-8.36844113, -21.4743150931), (0, -27.6490020045), (8.36844113, -21.4743150931))
            Line((8.36844113, -21.4743150931), (0, -17.6732341963))
        make_face()
    extrude(amount=F7_DEPTH)


with BuildPart() as f8:
    # F8 (new): a face of the model
    f8_faces = [f2e.part.faces().sort_by_distance(p)[0] for p in [
        (0, -6.35, 0),
    ]]
    extrude(f8_faces, amount=F8_DEPTH)


solid = Compound([f2.part, f2b.part, f2c.part, f2d.part, f2e.part, f8.part])
